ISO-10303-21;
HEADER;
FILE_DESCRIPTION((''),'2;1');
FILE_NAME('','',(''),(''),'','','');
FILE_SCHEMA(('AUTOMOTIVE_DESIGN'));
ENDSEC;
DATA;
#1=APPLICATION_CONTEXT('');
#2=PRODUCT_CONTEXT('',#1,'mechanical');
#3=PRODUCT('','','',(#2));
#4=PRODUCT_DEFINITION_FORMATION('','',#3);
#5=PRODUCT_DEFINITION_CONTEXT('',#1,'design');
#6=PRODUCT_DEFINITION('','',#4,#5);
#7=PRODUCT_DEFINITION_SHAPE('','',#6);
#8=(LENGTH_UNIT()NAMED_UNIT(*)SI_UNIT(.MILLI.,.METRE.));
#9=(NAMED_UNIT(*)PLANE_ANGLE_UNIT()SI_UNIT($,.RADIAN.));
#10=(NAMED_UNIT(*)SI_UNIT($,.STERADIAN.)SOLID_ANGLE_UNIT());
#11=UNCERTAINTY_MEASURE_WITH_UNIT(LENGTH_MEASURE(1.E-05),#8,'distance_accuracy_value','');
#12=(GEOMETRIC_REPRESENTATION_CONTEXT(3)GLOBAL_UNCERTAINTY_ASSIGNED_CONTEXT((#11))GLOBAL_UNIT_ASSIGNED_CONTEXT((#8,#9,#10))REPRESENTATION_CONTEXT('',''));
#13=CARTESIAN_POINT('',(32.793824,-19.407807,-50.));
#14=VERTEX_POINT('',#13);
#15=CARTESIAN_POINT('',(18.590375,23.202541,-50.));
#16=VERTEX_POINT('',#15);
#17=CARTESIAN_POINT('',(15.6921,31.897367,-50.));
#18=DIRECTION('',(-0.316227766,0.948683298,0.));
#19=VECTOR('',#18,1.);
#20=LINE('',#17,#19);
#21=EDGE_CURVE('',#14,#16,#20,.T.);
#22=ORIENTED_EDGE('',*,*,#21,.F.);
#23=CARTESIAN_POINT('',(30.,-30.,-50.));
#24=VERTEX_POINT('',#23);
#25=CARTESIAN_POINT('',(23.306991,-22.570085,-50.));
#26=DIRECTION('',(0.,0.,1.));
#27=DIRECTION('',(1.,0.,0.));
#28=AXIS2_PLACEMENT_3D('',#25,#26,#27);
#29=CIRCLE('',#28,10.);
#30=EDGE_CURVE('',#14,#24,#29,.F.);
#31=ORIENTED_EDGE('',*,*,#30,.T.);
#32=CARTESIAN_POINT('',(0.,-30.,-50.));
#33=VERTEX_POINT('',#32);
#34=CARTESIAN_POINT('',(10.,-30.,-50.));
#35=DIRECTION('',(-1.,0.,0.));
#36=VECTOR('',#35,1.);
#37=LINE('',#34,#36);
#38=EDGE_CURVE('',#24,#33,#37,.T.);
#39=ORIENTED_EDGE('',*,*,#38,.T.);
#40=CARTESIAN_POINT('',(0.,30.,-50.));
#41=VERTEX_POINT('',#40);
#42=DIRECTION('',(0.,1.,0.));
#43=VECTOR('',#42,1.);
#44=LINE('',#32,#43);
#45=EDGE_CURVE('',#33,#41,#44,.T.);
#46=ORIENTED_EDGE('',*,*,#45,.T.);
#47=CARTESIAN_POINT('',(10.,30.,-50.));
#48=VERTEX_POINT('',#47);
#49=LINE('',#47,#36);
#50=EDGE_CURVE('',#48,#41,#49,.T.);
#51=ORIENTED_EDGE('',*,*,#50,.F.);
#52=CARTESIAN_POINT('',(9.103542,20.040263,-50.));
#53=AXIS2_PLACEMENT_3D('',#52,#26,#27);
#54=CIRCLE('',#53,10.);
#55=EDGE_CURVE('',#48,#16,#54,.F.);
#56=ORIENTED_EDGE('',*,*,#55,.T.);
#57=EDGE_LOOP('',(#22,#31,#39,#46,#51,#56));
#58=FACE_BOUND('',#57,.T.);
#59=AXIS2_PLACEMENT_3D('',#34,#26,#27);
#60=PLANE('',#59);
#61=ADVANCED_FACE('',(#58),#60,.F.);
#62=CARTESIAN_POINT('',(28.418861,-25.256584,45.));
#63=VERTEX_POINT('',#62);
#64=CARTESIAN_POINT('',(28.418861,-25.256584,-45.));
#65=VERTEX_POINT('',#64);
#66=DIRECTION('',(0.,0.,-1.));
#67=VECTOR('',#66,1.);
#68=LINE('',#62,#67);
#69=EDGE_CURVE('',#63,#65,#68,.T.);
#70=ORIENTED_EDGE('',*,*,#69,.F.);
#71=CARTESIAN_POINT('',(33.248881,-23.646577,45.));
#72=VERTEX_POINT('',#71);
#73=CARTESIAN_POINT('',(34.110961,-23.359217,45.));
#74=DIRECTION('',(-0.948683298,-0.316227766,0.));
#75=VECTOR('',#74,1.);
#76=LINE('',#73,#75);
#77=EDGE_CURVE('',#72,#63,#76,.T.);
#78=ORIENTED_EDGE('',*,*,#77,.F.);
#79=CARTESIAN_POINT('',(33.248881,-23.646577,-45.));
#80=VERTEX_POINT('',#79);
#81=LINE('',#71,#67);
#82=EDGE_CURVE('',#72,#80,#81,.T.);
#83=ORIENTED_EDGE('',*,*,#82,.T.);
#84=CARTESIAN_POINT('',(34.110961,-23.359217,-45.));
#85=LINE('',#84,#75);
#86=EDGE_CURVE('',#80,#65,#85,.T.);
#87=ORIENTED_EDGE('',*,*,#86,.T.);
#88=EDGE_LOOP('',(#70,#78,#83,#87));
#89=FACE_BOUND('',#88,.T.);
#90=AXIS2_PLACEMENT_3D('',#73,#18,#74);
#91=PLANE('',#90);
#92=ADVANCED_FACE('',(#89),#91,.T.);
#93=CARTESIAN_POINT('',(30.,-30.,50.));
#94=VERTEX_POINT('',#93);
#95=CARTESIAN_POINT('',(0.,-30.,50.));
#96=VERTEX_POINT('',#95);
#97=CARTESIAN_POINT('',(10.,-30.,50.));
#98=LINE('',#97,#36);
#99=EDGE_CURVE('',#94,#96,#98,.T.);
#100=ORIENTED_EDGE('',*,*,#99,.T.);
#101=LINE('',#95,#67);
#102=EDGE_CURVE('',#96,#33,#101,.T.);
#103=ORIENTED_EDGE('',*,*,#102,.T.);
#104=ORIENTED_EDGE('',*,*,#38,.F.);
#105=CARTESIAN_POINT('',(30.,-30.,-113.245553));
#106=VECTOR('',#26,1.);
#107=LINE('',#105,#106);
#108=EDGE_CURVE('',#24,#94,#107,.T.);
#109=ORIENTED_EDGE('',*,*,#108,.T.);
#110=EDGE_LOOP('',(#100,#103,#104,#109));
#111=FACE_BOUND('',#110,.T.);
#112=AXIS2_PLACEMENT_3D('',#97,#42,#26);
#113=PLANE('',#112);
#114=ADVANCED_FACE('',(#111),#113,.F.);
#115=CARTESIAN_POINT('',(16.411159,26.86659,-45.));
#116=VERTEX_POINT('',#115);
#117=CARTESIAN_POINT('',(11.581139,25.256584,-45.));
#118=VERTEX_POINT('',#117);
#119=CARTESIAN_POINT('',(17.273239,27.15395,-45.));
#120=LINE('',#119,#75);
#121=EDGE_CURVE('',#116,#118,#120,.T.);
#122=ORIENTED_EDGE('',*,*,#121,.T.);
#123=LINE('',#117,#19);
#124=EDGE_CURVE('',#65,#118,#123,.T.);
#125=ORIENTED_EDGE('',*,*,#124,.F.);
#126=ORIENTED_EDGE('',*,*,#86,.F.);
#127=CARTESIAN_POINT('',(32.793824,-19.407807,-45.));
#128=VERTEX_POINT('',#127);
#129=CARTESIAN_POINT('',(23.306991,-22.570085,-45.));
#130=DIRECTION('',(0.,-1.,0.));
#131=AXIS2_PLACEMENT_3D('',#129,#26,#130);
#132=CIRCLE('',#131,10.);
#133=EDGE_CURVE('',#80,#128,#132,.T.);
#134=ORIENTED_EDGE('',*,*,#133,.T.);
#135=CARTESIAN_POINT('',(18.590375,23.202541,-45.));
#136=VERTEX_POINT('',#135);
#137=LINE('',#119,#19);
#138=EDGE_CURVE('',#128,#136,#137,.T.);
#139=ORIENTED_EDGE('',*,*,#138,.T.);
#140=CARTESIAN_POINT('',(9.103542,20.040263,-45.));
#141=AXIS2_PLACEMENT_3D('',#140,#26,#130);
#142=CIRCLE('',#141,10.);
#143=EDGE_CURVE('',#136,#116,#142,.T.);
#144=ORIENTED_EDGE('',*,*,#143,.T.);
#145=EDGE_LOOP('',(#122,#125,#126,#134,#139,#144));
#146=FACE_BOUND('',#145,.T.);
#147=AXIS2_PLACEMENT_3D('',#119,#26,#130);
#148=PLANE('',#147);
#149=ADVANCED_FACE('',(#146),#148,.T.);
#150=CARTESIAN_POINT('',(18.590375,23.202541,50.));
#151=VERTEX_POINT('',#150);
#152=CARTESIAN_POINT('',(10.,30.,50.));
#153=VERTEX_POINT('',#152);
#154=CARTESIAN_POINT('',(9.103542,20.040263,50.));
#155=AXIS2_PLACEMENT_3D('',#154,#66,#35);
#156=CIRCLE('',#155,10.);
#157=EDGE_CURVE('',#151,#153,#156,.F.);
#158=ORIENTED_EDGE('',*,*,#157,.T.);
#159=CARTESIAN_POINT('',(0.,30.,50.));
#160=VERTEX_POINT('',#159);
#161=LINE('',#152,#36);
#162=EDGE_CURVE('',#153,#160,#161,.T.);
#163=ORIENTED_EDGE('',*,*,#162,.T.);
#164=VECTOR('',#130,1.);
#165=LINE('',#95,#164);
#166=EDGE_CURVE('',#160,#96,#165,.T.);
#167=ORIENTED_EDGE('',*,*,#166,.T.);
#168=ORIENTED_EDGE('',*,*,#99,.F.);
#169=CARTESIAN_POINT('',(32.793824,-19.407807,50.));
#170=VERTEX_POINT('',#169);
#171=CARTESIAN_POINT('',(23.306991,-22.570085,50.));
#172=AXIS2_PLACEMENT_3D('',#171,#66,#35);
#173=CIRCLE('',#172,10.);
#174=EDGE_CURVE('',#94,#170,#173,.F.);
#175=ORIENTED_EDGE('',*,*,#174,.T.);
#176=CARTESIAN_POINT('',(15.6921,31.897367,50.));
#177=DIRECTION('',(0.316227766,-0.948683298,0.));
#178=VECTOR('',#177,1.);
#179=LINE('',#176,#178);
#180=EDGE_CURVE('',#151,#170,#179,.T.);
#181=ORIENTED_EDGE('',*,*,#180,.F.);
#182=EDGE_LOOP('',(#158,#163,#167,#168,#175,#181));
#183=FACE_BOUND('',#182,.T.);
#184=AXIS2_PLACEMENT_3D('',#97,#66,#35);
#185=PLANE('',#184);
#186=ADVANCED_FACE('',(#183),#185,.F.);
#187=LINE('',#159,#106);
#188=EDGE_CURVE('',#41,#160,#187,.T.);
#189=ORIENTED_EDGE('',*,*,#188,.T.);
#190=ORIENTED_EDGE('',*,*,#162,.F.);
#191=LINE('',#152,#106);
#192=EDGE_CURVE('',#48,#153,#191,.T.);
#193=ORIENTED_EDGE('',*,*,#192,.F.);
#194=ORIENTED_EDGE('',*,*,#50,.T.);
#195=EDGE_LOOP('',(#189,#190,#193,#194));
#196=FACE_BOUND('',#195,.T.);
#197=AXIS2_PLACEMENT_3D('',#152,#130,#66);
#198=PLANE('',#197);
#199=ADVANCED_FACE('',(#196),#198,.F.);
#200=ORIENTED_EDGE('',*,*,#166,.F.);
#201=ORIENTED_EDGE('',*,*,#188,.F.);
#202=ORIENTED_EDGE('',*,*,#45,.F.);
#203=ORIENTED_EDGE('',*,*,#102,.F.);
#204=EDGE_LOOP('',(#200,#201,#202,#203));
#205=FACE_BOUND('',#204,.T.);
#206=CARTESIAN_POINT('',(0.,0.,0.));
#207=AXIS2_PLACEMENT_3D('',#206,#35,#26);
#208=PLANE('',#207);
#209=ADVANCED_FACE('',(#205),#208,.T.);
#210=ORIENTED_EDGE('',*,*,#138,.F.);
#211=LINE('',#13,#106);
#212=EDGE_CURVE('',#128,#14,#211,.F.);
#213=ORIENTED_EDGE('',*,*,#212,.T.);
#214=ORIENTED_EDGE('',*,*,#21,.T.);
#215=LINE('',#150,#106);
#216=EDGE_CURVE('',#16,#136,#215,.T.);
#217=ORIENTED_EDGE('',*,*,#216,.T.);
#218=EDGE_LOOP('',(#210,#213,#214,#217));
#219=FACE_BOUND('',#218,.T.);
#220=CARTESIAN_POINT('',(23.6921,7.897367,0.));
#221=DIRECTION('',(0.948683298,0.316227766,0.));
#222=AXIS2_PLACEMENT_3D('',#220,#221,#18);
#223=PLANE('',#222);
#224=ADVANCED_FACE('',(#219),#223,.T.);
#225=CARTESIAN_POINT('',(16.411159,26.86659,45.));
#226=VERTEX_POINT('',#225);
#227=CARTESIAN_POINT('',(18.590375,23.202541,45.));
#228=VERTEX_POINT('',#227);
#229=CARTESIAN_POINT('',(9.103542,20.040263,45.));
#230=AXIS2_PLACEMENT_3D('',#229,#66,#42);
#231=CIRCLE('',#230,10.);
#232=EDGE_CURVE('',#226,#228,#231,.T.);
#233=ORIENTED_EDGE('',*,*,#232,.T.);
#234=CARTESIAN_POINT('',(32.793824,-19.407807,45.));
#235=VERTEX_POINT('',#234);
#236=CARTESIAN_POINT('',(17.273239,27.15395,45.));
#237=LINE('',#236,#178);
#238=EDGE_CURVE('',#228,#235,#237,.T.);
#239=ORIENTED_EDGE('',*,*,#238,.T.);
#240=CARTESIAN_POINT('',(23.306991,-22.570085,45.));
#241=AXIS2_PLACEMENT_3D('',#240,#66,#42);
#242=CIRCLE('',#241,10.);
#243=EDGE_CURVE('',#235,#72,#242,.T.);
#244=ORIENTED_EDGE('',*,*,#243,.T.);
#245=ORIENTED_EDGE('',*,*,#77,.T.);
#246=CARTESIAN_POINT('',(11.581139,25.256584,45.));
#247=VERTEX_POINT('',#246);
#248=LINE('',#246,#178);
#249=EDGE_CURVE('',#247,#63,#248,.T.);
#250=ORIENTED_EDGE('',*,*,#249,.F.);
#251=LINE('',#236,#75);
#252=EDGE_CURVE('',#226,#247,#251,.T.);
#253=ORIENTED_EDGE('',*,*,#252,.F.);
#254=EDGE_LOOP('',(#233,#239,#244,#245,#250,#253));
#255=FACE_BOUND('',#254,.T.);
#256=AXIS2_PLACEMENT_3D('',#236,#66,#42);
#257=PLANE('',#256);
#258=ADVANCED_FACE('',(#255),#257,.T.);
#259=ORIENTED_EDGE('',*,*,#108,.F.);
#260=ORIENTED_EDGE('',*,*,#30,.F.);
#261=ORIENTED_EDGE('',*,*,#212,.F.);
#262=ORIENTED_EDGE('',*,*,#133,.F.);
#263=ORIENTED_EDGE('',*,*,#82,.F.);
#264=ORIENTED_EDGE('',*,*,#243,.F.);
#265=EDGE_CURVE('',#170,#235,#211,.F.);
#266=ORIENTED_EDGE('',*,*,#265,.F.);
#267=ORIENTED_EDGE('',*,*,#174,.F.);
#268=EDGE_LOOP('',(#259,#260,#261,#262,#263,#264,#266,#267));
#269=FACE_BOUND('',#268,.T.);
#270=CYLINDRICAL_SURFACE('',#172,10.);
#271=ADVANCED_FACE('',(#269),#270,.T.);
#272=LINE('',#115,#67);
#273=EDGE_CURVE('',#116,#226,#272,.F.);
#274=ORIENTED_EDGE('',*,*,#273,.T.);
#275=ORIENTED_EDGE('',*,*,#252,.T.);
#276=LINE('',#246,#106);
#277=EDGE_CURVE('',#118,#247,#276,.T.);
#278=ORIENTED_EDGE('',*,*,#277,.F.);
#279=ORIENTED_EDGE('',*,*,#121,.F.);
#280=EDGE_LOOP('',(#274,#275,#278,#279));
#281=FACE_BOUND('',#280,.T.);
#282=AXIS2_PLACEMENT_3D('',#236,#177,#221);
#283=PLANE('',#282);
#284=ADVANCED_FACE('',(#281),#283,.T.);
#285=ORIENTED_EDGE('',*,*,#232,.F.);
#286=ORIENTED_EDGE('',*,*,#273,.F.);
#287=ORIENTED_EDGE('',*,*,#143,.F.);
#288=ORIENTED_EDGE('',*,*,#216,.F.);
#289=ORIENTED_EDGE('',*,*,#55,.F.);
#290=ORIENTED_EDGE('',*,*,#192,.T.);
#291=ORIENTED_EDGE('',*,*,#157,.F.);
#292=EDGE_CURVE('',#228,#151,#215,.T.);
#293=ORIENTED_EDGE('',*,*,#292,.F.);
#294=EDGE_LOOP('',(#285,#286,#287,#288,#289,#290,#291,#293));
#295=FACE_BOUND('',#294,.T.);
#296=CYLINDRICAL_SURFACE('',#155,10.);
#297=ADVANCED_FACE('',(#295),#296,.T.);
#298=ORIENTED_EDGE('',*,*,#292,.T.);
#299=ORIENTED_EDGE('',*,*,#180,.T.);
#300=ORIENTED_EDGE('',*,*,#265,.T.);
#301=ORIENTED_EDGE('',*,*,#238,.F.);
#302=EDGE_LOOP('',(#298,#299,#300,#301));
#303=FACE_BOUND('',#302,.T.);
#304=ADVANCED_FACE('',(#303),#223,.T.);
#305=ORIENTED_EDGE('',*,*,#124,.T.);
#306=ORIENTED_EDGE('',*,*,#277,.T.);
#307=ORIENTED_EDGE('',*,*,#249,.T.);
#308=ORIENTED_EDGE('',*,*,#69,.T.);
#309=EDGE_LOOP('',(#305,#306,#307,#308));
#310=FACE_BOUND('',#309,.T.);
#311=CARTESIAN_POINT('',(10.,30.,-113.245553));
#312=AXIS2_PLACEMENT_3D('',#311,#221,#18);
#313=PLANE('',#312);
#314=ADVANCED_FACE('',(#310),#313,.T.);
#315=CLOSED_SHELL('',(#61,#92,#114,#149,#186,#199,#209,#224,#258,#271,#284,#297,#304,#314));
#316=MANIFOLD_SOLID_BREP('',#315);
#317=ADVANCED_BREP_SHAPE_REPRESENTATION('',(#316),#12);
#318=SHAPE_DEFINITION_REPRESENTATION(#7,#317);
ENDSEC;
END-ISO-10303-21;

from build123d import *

# Parameters (mm, degrees)
SKETCH1_W           = 100
SKETCH1_H           = 60
BOSS_EXTRUDE1_DEPTH = 10
BOSS_EXTRUDE2_DEPTH = 100
SKETCH3_W           = 100
SKETCH3_H           = 63.245553203
SKETCH3_W_2         = 90
SKETCH3_H_2         = 53.245553203
BOSS_EXTRUDE3_DEPTH = 6
FILLET1_R           = 10
FILLET3_R           = 10


with BuildPart() as part:
    # Sketch1 → Boss-Extrude1 (new body)
    with BuildSketch(Plane(origin=(0, 0, 0), x_dir=(0, 0, -1), z_dir=(1, 0, 0))):
        Rectangle(SKETCH1_W, SKETCH1_H)
    extrude(amount=BOSS_EXTRUDE1_DEPTH)

    # Sketch2 → Boss-Extrude2 (add)
    with BuildSketch(Plane.XY.offset(50)):
        Polygon((10, 30), (30, -30), (10, -30), align=None)
    extrude(amount=-BOSS_EXTRUDE2_DEPTH)

    # Sketch3 → Boss-Extrude3 (add)
    with BuildSketch(Plane(origin=(18, 6, 0), x_dir=(0, 0, -1), z_dir=(0.9486832980505139, 0.316227766016838, 0))):
        with Locations((0, -6.324555321)):
            Rectangle(SKETCH3_W, SKETCH3_H)
        with Locations((0, -6.324555321)):
            Rectangle(SKETCH3_W_2, SKETCH3_H_2, mode=Mode.SUBTRACT)
    extrude(amount=BOSS_EXTRUDE3_DEPTH)

    # Fillet1
    # the kernel refuses this fillet: 10 mm, written as the material it takes off along each edge
    with BuildSketch(Plane(origin=(15.692099788, 31.897366596, 72.912878475), x_dir=(0.31622776601683805, -0.9486832980505137, 0), z_dir=(0, 0, -1))) as fillet1_piece_1:
        with BuildLine():
            CenterArc((9.16515139, 10), FILLET1_R, 203.578178478, 66.421821522)
            Line((0, 6), (0, 0))
            Line((0, 0), (9.16515139, 0))
        make_face()
    extrude(amount=145.82575695, mode=Mode.SUBTRACT)

    # Fillet3
    # the kernel refuses this fillet: 10 mm, written as the material it takes off along each edge
    with BuildSketch(Plane(origin=(35.692099788, -28.102633404, -72.912878475), x_dir=(-0.9486832980505142, -0.3162277660168365, 0), z_dir=(0, 0, 1))) as fillet3_piece_1:
        with BuildLine():
            CenterArc((10, -9.16515139), FILLET3_R, 113.578178478, 66.421821522)
            Line((0, -9.16515139), (-0.2, -9.16515139))
            Line((-0.2, -9.16515139), (-0.2, 0))
            Line((-0.2, 0), (0, 0.2))
            ThreePointArc((0, 0.2), (3, 0.2), (5.92, 0.183303028))
            Line((5.92, 0.183303028), (6, 0))
        make_face()
    extrude(amount=145.82575695, mode=Mode.SUBTRACT)


solid = part.part
